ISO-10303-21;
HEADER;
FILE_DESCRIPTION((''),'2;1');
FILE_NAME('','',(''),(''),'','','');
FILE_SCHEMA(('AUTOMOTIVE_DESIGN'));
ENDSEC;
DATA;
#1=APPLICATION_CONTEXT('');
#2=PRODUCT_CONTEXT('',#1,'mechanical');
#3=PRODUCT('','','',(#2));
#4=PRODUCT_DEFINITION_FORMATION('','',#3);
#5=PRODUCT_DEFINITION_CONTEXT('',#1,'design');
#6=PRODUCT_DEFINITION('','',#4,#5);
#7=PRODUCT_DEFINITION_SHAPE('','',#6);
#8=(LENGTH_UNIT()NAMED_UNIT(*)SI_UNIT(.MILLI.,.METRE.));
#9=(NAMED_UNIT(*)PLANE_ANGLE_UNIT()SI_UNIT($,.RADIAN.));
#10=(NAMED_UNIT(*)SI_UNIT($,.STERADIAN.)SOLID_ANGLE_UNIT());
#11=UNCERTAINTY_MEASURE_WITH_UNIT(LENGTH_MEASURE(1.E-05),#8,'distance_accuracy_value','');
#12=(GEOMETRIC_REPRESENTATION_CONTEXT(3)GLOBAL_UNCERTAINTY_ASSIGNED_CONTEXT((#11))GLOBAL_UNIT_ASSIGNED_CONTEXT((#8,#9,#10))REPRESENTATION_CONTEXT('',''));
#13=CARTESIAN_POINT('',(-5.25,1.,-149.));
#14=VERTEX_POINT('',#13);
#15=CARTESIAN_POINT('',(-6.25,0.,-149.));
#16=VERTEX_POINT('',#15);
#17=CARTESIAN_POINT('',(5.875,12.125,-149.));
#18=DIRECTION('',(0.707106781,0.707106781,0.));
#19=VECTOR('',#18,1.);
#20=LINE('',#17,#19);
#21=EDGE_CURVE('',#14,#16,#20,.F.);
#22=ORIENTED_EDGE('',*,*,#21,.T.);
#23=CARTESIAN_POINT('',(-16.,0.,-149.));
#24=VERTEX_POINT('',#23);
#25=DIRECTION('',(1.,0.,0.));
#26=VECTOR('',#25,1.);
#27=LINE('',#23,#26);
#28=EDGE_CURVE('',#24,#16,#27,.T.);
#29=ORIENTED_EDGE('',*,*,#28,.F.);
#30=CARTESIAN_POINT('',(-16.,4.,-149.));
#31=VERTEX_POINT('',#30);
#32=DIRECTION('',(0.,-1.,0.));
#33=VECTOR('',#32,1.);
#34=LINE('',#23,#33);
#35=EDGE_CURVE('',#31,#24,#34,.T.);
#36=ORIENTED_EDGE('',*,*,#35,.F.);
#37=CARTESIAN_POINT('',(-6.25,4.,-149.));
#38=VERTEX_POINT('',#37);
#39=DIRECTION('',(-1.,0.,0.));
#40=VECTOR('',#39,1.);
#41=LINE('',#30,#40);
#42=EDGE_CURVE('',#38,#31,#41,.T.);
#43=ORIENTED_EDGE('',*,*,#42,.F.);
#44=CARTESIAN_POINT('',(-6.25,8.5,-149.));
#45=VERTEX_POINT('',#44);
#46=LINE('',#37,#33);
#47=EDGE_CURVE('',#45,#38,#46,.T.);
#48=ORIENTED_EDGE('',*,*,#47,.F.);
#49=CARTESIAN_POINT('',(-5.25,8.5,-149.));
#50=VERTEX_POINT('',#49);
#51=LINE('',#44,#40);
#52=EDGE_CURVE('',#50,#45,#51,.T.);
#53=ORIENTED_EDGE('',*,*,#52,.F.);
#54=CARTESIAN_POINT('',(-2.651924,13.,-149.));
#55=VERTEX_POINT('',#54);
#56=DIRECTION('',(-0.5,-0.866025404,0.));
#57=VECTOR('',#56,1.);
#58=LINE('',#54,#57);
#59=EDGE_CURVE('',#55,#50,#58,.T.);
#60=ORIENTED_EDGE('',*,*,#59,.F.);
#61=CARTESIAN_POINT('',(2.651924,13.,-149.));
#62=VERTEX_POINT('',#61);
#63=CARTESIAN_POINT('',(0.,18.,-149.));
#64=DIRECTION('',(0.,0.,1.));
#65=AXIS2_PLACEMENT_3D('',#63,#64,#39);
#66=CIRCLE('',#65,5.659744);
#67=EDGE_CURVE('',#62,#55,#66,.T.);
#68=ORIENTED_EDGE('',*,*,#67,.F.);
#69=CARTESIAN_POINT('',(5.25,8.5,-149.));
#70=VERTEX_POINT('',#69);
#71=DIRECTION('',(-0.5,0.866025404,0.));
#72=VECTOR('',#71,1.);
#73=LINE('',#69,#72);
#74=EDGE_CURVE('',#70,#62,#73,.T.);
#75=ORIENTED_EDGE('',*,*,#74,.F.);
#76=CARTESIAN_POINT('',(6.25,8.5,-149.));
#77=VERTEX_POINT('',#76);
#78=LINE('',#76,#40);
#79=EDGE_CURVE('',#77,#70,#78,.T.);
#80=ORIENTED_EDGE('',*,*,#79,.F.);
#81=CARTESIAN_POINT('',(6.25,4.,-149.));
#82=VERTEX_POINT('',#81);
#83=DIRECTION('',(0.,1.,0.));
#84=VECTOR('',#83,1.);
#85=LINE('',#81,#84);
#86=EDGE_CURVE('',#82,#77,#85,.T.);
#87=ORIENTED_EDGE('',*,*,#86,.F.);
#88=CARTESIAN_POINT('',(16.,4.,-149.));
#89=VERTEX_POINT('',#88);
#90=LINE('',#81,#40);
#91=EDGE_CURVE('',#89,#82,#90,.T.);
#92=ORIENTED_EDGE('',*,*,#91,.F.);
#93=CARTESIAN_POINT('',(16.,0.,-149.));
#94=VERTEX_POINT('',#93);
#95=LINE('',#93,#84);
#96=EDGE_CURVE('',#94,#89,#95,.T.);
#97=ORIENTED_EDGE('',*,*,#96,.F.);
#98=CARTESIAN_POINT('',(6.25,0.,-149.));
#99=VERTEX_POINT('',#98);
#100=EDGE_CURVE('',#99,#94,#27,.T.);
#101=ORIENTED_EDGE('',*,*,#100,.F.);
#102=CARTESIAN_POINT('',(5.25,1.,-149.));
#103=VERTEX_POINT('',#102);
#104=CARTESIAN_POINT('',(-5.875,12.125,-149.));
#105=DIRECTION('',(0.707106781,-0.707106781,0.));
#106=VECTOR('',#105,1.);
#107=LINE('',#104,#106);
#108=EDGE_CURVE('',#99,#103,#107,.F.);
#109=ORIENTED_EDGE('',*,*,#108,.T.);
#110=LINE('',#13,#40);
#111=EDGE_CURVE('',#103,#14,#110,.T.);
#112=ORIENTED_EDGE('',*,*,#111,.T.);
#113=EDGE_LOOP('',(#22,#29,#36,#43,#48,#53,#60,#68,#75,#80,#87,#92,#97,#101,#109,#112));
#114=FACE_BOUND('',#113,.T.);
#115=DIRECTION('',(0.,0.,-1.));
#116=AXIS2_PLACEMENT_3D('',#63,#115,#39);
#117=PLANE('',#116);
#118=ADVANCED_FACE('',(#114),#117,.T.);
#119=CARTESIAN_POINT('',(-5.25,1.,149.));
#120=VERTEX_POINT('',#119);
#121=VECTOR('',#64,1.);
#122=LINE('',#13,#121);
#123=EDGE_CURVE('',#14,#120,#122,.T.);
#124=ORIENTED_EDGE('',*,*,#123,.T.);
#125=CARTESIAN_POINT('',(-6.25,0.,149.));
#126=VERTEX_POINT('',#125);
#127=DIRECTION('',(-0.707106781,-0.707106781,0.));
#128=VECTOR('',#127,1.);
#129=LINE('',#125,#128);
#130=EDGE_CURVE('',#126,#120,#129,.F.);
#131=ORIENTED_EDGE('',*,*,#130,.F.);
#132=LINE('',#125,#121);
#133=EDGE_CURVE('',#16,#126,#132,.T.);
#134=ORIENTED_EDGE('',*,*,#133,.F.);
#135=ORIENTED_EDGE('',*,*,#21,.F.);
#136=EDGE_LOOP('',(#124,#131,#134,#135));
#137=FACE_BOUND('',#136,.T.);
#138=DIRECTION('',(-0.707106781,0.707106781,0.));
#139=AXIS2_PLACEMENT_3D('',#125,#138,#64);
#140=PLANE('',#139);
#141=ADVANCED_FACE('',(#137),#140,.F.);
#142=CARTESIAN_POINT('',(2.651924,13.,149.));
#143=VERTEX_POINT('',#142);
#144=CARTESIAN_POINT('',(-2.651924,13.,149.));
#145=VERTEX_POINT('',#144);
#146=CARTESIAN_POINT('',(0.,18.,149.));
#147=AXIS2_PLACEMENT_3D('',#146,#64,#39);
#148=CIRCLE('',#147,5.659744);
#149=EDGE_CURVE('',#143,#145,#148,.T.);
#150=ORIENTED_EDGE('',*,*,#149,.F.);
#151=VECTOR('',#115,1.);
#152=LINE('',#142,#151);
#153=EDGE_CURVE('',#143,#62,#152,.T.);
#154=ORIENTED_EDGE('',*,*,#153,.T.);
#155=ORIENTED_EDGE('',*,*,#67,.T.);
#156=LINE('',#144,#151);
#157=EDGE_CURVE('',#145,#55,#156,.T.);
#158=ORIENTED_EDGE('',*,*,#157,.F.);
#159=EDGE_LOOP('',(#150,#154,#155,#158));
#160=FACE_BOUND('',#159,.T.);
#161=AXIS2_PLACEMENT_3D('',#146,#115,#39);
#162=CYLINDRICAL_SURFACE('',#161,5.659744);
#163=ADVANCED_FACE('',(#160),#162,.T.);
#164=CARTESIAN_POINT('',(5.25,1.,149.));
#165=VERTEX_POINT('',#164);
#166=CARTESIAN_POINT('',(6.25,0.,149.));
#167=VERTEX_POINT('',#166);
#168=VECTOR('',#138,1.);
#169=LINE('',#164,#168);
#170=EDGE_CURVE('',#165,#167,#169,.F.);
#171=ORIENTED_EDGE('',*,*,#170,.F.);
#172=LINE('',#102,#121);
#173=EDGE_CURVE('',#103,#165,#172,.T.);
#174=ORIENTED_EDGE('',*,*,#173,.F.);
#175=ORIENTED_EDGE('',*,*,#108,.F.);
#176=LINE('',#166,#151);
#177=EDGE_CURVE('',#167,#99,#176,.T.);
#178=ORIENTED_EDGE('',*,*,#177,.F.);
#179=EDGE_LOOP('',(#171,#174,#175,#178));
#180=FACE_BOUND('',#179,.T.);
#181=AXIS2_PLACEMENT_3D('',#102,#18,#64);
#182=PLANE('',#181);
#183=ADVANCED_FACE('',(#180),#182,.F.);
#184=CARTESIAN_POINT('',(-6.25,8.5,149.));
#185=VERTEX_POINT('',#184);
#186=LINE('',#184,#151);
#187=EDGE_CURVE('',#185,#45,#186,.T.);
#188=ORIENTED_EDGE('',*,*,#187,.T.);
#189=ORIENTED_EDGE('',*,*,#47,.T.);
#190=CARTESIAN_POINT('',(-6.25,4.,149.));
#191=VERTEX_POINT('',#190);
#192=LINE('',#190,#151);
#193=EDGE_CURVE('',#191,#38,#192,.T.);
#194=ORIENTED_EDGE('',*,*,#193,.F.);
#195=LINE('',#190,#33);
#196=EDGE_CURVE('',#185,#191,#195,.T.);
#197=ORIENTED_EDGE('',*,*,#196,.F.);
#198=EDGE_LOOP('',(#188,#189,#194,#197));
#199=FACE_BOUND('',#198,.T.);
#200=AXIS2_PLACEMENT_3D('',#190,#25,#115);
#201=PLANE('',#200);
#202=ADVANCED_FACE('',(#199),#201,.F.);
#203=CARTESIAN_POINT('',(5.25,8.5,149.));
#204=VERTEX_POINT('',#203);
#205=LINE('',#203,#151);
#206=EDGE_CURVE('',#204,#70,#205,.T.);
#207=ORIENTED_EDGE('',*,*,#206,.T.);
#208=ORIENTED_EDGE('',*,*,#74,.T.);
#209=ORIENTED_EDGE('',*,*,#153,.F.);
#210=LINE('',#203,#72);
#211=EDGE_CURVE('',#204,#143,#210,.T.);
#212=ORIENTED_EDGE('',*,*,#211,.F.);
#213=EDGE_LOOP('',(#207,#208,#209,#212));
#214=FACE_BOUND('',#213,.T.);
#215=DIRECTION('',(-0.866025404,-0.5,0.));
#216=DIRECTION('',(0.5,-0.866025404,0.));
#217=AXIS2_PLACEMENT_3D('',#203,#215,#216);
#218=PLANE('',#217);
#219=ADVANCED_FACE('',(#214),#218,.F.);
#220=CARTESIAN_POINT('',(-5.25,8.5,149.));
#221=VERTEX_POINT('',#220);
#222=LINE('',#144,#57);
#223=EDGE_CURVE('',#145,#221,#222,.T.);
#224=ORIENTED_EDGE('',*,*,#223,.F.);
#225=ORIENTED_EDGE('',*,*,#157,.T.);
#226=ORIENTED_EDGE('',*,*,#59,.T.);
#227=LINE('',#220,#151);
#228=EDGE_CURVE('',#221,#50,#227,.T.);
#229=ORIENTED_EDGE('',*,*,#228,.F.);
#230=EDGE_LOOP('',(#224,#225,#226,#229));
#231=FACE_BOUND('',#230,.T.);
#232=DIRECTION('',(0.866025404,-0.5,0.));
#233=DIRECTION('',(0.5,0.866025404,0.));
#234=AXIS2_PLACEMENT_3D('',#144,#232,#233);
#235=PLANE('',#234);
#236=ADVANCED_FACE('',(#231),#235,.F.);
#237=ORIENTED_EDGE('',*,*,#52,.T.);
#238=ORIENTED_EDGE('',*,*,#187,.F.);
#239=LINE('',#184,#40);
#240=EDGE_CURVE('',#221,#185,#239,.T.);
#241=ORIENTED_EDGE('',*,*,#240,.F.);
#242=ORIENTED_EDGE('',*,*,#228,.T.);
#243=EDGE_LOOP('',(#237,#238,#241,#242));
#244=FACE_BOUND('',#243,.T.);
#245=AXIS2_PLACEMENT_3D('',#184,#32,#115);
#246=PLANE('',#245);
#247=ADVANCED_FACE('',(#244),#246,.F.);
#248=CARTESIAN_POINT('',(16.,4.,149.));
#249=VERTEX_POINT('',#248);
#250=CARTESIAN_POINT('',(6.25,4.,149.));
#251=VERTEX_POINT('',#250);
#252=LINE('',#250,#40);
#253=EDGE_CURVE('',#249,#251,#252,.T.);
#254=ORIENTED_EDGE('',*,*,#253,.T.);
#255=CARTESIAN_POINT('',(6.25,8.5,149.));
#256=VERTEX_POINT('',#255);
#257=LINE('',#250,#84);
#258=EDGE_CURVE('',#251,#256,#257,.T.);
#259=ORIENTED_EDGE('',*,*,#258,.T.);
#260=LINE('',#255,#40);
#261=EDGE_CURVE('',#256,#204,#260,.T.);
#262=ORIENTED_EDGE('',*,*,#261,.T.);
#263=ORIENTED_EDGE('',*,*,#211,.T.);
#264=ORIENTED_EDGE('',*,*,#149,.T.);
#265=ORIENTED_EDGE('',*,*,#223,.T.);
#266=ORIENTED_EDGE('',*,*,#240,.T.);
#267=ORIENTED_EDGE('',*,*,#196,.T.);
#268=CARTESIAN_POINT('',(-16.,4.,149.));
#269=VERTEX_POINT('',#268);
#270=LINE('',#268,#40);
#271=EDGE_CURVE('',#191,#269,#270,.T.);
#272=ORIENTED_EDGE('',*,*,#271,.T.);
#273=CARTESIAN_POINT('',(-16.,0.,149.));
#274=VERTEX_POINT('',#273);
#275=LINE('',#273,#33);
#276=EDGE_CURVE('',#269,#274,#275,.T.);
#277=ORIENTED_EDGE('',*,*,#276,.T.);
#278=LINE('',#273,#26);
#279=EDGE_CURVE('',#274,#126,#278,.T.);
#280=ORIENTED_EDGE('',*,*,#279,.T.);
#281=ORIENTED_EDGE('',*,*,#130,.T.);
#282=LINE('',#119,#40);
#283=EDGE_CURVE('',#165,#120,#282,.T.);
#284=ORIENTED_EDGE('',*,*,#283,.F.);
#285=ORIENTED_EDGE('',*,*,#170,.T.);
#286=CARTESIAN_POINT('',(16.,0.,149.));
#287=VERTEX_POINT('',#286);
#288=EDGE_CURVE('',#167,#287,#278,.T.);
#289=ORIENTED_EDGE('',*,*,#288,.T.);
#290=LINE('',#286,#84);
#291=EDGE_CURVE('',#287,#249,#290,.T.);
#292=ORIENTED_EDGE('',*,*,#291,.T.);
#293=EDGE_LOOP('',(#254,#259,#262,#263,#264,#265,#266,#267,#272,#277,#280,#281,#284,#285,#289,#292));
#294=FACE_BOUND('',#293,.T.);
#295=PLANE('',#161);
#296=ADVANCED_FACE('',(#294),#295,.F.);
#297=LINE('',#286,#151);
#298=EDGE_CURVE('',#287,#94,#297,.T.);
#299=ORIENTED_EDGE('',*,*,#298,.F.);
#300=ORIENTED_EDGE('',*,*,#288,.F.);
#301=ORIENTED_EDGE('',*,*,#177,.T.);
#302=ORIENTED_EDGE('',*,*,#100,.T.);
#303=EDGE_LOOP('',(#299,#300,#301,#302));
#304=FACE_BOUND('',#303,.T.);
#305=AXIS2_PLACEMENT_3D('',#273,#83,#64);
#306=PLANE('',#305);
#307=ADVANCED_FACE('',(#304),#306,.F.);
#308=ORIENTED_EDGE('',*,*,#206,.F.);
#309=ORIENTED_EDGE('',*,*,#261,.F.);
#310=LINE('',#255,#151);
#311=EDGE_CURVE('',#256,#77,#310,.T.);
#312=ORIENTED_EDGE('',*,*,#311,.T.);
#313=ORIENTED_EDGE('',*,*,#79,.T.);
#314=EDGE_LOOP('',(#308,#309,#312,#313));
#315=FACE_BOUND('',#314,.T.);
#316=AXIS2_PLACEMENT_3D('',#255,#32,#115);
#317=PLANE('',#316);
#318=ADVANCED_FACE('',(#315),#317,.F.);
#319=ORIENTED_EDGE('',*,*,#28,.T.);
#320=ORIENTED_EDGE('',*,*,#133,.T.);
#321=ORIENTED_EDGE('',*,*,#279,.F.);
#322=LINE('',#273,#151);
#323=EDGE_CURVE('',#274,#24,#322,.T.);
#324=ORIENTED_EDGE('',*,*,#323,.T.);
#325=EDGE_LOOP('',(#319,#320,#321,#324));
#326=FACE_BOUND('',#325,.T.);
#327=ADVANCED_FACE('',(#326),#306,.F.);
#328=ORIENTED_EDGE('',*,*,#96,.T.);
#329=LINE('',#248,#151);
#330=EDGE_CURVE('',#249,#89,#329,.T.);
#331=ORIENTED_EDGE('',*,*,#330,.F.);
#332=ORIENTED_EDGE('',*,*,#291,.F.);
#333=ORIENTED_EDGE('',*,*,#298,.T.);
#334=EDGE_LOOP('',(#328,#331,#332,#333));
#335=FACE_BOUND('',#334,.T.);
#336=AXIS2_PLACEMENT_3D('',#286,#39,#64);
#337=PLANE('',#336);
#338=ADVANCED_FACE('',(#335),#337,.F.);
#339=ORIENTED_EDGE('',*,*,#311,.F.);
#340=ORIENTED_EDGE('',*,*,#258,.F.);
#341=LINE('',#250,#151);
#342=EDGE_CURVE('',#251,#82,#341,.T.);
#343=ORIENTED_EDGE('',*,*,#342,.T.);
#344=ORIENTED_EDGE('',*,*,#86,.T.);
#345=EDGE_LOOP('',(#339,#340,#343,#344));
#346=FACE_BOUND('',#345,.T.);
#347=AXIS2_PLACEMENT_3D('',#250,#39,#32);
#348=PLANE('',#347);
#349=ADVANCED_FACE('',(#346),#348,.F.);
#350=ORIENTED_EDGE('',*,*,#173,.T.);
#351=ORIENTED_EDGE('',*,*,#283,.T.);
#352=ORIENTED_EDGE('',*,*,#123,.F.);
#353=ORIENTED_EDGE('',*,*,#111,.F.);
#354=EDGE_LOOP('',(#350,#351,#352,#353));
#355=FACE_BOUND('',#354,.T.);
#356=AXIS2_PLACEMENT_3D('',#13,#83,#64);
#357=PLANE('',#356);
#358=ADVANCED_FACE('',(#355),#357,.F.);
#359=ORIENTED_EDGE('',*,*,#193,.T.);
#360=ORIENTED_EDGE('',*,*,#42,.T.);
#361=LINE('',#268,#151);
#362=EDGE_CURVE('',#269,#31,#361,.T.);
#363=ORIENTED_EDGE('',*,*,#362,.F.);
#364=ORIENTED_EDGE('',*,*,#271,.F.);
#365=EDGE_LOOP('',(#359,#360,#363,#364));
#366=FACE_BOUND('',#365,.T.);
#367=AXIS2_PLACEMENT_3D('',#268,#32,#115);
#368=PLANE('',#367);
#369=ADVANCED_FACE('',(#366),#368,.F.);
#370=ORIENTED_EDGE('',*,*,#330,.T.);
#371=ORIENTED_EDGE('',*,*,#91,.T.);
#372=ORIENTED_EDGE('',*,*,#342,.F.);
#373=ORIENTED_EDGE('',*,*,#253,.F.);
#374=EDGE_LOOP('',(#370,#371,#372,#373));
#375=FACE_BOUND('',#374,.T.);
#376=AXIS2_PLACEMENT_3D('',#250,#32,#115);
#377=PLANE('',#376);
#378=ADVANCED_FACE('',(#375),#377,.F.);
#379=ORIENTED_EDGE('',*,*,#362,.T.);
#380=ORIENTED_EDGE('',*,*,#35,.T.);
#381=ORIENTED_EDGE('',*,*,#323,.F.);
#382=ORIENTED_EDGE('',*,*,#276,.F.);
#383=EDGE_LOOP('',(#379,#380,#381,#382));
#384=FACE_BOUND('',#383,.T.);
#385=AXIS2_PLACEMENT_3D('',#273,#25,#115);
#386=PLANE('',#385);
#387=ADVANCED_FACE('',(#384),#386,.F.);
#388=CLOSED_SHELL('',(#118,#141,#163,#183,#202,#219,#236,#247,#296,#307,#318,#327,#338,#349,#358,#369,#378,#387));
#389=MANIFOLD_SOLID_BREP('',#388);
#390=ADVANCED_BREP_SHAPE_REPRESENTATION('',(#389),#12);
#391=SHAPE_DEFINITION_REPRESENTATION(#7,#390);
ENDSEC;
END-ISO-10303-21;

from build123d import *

# Parameters (mm, degrees)
EXTRUDE_1_DEPTH     = 149
SKETCH_2_W          = 10.5
SKETCH_2_H          = 1
CUT_EXTRUDE_1_DEPTH = 300.365635096
CHAMFER_1_SIZE      = 1


with BuildPart() as part:
    # 草图1 → 凸台-拉伸1 (new, symmetric)
    with BuildSketch(Plane.XY):
        with BuildLine():
            Line((-16, 0), (16, 0))
            Line((16, 0), (16, 4))
            Line((16, 4), (6.25, 4))
            Line((6.25, 4), (6.25, 8.5))
            Line((6.25, 8.5), (5.25, 8.5))
            Line((5.25, 8.5), (2.651923789, 13))
            ThreePointArc((2.651923789, 13), (0, 23.659743791), (-2.651923789, 13))
            Line((-2.651923789, 13), (-5.25, 8.5))
            Line((-5.25, 8.5), (-6.25, 8.5))
            Line((-6.25, 8.5), (-6.25, 4))
            Line((-6.25, 4), (-16, 4))
            Line((-16, 4), (-16, 0))
        make_face()
    extrude(amount=EXTRUDE_1_DEPTH, both=True)

    # 草图2 → 切除-拉伸1 (cut, through all)
    with BuildSketch(Plane.XY.offset(149)):
        with Locations((0, 0.5)):
            Rectangle(SKETCH_2_W, SKETCH_2_H)
    extrude(amount=-CUT_EXTRUDE_1_DEPTH, mode=Mode.SUBTRACT)

    # 倒角1
    chamfer_1_edges = [part.edges().sort_by_distance(p)[0] for p in [
        (5.25, 0, 0),
        (-5.25, 0, 0),
    ]]
    chamfer(chamfer_1_edges, length=CHAMFER_1_SIZE - 0.0001)  # a hair under: the kernel refuses the full size


solid = part.part
